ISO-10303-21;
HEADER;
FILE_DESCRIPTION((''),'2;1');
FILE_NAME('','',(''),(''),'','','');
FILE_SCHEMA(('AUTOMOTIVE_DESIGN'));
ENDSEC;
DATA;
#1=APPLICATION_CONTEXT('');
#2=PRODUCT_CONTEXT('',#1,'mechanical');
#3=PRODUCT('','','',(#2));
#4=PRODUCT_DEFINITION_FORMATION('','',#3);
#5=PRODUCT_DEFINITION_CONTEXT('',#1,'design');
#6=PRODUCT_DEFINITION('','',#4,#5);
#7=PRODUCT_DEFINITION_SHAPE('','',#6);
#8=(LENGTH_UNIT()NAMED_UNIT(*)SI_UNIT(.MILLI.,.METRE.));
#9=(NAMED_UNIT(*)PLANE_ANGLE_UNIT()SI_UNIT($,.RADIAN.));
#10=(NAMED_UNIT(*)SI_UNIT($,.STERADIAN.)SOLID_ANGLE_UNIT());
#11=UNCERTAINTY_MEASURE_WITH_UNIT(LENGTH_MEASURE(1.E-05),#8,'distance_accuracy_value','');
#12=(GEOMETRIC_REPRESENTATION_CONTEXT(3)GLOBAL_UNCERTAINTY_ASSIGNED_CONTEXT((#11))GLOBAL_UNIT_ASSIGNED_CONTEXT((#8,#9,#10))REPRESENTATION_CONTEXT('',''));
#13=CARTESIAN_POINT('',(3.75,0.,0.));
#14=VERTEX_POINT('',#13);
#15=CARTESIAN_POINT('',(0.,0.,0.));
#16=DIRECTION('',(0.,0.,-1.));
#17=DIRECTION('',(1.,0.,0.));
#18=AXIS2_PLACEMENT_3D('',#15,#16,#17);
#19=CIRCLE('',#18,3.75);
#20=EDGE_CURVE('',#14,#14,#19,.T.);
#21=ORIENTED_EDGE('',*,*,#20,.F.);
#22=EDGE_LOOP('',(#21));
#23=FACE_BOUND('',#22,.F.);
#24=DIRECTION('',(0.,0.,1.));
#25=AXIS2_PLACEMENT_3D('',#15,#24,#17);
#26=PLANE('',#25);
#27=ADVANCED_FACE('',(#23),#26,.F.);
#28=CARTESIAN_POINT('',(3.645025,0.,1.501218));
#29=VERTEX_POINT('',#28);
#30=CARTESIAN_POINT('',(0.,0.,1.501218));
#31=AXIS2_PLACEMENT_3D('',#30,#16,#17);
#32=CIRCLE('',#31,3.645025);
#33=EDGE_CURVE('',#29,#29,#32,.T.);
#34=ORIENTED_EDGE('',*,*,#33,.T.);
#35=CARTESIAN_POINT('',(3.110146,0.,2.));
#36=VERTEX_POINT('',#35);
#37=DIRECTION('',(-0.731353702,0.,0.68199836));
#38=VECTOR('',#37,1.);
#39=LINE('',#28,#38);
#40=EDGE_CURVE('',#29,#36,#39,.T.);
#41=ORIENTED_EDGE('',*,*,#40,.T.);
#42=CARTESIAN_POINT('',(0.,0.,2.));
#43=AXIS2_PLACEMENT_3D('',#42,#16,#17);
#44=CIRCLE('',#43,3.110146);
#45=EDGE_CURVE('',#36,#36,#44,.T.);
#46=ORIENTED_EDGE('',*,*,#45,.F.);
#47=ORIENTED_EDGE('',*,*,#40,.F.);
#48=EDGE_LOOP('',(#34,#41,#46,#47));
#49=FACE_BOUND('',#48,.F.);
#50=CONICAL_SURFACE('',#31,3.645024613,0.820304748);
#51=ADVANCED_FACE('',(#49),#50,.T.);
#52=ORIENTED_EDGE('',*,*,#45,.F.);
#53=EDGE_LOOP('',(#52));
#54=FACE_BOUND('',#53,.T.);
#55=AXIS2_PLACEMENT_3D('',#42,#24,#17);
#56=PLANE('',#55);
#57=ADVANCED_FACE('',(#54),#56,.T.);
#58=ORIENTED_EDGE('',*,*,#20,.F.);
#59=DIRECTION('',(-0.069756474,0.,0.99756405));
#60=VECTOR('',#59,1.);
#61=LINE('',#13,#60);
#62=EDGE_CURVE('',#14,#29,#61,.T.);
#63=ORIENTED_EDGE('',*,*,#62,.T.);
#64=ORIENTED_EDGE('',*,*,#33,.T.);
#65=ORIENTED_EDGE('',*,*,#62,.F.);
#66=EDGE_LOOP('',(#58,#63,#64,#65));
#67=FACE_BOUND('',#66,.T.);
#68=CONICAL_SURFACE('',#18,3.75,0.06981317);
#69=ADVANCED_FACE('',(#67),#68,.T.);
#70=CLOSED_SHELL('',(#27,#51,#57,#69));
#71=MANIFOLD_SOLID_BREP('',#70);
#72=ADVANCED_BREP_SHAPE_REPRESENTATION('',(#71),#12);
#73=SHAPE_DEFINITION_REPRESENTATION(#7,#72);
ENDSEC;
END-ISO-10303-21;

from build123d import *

# Parameters (mm, degrees)
F0_R     = 3.75
F1_DEPTH = 2
F1_TAPER = 4


# Not quite as in the source:
# - a fillet or chamfer that OpenCascade refuses, or shapes differently, is made with other operations: its cross-section is extruded or revolved along the edge and cut away or added


with BuildPart() as f1:
    # F0 (on Top) → F1 (new body)
    with BuildSketch(Plane.XY):
        Circle(F0_R)
    extrude(amount=F1_DEPTH, taper=F1_TAPER)

    # F2: chamfer of 0.5 on 1 edges, made by hand

    # F2_s1 → F2_t2 (revolve, cut)
    with BuildSketch(Plane.XZ):
        Polygon((3.645024613, 1.5012179749), (3.1101463761, 2), (3.6101463761, 2), align=None)
    revolve(axis=Axis((0, 0, 2), (0, 0, -1)), mode=Mode.SUBTRACT)


solid = f1.part
